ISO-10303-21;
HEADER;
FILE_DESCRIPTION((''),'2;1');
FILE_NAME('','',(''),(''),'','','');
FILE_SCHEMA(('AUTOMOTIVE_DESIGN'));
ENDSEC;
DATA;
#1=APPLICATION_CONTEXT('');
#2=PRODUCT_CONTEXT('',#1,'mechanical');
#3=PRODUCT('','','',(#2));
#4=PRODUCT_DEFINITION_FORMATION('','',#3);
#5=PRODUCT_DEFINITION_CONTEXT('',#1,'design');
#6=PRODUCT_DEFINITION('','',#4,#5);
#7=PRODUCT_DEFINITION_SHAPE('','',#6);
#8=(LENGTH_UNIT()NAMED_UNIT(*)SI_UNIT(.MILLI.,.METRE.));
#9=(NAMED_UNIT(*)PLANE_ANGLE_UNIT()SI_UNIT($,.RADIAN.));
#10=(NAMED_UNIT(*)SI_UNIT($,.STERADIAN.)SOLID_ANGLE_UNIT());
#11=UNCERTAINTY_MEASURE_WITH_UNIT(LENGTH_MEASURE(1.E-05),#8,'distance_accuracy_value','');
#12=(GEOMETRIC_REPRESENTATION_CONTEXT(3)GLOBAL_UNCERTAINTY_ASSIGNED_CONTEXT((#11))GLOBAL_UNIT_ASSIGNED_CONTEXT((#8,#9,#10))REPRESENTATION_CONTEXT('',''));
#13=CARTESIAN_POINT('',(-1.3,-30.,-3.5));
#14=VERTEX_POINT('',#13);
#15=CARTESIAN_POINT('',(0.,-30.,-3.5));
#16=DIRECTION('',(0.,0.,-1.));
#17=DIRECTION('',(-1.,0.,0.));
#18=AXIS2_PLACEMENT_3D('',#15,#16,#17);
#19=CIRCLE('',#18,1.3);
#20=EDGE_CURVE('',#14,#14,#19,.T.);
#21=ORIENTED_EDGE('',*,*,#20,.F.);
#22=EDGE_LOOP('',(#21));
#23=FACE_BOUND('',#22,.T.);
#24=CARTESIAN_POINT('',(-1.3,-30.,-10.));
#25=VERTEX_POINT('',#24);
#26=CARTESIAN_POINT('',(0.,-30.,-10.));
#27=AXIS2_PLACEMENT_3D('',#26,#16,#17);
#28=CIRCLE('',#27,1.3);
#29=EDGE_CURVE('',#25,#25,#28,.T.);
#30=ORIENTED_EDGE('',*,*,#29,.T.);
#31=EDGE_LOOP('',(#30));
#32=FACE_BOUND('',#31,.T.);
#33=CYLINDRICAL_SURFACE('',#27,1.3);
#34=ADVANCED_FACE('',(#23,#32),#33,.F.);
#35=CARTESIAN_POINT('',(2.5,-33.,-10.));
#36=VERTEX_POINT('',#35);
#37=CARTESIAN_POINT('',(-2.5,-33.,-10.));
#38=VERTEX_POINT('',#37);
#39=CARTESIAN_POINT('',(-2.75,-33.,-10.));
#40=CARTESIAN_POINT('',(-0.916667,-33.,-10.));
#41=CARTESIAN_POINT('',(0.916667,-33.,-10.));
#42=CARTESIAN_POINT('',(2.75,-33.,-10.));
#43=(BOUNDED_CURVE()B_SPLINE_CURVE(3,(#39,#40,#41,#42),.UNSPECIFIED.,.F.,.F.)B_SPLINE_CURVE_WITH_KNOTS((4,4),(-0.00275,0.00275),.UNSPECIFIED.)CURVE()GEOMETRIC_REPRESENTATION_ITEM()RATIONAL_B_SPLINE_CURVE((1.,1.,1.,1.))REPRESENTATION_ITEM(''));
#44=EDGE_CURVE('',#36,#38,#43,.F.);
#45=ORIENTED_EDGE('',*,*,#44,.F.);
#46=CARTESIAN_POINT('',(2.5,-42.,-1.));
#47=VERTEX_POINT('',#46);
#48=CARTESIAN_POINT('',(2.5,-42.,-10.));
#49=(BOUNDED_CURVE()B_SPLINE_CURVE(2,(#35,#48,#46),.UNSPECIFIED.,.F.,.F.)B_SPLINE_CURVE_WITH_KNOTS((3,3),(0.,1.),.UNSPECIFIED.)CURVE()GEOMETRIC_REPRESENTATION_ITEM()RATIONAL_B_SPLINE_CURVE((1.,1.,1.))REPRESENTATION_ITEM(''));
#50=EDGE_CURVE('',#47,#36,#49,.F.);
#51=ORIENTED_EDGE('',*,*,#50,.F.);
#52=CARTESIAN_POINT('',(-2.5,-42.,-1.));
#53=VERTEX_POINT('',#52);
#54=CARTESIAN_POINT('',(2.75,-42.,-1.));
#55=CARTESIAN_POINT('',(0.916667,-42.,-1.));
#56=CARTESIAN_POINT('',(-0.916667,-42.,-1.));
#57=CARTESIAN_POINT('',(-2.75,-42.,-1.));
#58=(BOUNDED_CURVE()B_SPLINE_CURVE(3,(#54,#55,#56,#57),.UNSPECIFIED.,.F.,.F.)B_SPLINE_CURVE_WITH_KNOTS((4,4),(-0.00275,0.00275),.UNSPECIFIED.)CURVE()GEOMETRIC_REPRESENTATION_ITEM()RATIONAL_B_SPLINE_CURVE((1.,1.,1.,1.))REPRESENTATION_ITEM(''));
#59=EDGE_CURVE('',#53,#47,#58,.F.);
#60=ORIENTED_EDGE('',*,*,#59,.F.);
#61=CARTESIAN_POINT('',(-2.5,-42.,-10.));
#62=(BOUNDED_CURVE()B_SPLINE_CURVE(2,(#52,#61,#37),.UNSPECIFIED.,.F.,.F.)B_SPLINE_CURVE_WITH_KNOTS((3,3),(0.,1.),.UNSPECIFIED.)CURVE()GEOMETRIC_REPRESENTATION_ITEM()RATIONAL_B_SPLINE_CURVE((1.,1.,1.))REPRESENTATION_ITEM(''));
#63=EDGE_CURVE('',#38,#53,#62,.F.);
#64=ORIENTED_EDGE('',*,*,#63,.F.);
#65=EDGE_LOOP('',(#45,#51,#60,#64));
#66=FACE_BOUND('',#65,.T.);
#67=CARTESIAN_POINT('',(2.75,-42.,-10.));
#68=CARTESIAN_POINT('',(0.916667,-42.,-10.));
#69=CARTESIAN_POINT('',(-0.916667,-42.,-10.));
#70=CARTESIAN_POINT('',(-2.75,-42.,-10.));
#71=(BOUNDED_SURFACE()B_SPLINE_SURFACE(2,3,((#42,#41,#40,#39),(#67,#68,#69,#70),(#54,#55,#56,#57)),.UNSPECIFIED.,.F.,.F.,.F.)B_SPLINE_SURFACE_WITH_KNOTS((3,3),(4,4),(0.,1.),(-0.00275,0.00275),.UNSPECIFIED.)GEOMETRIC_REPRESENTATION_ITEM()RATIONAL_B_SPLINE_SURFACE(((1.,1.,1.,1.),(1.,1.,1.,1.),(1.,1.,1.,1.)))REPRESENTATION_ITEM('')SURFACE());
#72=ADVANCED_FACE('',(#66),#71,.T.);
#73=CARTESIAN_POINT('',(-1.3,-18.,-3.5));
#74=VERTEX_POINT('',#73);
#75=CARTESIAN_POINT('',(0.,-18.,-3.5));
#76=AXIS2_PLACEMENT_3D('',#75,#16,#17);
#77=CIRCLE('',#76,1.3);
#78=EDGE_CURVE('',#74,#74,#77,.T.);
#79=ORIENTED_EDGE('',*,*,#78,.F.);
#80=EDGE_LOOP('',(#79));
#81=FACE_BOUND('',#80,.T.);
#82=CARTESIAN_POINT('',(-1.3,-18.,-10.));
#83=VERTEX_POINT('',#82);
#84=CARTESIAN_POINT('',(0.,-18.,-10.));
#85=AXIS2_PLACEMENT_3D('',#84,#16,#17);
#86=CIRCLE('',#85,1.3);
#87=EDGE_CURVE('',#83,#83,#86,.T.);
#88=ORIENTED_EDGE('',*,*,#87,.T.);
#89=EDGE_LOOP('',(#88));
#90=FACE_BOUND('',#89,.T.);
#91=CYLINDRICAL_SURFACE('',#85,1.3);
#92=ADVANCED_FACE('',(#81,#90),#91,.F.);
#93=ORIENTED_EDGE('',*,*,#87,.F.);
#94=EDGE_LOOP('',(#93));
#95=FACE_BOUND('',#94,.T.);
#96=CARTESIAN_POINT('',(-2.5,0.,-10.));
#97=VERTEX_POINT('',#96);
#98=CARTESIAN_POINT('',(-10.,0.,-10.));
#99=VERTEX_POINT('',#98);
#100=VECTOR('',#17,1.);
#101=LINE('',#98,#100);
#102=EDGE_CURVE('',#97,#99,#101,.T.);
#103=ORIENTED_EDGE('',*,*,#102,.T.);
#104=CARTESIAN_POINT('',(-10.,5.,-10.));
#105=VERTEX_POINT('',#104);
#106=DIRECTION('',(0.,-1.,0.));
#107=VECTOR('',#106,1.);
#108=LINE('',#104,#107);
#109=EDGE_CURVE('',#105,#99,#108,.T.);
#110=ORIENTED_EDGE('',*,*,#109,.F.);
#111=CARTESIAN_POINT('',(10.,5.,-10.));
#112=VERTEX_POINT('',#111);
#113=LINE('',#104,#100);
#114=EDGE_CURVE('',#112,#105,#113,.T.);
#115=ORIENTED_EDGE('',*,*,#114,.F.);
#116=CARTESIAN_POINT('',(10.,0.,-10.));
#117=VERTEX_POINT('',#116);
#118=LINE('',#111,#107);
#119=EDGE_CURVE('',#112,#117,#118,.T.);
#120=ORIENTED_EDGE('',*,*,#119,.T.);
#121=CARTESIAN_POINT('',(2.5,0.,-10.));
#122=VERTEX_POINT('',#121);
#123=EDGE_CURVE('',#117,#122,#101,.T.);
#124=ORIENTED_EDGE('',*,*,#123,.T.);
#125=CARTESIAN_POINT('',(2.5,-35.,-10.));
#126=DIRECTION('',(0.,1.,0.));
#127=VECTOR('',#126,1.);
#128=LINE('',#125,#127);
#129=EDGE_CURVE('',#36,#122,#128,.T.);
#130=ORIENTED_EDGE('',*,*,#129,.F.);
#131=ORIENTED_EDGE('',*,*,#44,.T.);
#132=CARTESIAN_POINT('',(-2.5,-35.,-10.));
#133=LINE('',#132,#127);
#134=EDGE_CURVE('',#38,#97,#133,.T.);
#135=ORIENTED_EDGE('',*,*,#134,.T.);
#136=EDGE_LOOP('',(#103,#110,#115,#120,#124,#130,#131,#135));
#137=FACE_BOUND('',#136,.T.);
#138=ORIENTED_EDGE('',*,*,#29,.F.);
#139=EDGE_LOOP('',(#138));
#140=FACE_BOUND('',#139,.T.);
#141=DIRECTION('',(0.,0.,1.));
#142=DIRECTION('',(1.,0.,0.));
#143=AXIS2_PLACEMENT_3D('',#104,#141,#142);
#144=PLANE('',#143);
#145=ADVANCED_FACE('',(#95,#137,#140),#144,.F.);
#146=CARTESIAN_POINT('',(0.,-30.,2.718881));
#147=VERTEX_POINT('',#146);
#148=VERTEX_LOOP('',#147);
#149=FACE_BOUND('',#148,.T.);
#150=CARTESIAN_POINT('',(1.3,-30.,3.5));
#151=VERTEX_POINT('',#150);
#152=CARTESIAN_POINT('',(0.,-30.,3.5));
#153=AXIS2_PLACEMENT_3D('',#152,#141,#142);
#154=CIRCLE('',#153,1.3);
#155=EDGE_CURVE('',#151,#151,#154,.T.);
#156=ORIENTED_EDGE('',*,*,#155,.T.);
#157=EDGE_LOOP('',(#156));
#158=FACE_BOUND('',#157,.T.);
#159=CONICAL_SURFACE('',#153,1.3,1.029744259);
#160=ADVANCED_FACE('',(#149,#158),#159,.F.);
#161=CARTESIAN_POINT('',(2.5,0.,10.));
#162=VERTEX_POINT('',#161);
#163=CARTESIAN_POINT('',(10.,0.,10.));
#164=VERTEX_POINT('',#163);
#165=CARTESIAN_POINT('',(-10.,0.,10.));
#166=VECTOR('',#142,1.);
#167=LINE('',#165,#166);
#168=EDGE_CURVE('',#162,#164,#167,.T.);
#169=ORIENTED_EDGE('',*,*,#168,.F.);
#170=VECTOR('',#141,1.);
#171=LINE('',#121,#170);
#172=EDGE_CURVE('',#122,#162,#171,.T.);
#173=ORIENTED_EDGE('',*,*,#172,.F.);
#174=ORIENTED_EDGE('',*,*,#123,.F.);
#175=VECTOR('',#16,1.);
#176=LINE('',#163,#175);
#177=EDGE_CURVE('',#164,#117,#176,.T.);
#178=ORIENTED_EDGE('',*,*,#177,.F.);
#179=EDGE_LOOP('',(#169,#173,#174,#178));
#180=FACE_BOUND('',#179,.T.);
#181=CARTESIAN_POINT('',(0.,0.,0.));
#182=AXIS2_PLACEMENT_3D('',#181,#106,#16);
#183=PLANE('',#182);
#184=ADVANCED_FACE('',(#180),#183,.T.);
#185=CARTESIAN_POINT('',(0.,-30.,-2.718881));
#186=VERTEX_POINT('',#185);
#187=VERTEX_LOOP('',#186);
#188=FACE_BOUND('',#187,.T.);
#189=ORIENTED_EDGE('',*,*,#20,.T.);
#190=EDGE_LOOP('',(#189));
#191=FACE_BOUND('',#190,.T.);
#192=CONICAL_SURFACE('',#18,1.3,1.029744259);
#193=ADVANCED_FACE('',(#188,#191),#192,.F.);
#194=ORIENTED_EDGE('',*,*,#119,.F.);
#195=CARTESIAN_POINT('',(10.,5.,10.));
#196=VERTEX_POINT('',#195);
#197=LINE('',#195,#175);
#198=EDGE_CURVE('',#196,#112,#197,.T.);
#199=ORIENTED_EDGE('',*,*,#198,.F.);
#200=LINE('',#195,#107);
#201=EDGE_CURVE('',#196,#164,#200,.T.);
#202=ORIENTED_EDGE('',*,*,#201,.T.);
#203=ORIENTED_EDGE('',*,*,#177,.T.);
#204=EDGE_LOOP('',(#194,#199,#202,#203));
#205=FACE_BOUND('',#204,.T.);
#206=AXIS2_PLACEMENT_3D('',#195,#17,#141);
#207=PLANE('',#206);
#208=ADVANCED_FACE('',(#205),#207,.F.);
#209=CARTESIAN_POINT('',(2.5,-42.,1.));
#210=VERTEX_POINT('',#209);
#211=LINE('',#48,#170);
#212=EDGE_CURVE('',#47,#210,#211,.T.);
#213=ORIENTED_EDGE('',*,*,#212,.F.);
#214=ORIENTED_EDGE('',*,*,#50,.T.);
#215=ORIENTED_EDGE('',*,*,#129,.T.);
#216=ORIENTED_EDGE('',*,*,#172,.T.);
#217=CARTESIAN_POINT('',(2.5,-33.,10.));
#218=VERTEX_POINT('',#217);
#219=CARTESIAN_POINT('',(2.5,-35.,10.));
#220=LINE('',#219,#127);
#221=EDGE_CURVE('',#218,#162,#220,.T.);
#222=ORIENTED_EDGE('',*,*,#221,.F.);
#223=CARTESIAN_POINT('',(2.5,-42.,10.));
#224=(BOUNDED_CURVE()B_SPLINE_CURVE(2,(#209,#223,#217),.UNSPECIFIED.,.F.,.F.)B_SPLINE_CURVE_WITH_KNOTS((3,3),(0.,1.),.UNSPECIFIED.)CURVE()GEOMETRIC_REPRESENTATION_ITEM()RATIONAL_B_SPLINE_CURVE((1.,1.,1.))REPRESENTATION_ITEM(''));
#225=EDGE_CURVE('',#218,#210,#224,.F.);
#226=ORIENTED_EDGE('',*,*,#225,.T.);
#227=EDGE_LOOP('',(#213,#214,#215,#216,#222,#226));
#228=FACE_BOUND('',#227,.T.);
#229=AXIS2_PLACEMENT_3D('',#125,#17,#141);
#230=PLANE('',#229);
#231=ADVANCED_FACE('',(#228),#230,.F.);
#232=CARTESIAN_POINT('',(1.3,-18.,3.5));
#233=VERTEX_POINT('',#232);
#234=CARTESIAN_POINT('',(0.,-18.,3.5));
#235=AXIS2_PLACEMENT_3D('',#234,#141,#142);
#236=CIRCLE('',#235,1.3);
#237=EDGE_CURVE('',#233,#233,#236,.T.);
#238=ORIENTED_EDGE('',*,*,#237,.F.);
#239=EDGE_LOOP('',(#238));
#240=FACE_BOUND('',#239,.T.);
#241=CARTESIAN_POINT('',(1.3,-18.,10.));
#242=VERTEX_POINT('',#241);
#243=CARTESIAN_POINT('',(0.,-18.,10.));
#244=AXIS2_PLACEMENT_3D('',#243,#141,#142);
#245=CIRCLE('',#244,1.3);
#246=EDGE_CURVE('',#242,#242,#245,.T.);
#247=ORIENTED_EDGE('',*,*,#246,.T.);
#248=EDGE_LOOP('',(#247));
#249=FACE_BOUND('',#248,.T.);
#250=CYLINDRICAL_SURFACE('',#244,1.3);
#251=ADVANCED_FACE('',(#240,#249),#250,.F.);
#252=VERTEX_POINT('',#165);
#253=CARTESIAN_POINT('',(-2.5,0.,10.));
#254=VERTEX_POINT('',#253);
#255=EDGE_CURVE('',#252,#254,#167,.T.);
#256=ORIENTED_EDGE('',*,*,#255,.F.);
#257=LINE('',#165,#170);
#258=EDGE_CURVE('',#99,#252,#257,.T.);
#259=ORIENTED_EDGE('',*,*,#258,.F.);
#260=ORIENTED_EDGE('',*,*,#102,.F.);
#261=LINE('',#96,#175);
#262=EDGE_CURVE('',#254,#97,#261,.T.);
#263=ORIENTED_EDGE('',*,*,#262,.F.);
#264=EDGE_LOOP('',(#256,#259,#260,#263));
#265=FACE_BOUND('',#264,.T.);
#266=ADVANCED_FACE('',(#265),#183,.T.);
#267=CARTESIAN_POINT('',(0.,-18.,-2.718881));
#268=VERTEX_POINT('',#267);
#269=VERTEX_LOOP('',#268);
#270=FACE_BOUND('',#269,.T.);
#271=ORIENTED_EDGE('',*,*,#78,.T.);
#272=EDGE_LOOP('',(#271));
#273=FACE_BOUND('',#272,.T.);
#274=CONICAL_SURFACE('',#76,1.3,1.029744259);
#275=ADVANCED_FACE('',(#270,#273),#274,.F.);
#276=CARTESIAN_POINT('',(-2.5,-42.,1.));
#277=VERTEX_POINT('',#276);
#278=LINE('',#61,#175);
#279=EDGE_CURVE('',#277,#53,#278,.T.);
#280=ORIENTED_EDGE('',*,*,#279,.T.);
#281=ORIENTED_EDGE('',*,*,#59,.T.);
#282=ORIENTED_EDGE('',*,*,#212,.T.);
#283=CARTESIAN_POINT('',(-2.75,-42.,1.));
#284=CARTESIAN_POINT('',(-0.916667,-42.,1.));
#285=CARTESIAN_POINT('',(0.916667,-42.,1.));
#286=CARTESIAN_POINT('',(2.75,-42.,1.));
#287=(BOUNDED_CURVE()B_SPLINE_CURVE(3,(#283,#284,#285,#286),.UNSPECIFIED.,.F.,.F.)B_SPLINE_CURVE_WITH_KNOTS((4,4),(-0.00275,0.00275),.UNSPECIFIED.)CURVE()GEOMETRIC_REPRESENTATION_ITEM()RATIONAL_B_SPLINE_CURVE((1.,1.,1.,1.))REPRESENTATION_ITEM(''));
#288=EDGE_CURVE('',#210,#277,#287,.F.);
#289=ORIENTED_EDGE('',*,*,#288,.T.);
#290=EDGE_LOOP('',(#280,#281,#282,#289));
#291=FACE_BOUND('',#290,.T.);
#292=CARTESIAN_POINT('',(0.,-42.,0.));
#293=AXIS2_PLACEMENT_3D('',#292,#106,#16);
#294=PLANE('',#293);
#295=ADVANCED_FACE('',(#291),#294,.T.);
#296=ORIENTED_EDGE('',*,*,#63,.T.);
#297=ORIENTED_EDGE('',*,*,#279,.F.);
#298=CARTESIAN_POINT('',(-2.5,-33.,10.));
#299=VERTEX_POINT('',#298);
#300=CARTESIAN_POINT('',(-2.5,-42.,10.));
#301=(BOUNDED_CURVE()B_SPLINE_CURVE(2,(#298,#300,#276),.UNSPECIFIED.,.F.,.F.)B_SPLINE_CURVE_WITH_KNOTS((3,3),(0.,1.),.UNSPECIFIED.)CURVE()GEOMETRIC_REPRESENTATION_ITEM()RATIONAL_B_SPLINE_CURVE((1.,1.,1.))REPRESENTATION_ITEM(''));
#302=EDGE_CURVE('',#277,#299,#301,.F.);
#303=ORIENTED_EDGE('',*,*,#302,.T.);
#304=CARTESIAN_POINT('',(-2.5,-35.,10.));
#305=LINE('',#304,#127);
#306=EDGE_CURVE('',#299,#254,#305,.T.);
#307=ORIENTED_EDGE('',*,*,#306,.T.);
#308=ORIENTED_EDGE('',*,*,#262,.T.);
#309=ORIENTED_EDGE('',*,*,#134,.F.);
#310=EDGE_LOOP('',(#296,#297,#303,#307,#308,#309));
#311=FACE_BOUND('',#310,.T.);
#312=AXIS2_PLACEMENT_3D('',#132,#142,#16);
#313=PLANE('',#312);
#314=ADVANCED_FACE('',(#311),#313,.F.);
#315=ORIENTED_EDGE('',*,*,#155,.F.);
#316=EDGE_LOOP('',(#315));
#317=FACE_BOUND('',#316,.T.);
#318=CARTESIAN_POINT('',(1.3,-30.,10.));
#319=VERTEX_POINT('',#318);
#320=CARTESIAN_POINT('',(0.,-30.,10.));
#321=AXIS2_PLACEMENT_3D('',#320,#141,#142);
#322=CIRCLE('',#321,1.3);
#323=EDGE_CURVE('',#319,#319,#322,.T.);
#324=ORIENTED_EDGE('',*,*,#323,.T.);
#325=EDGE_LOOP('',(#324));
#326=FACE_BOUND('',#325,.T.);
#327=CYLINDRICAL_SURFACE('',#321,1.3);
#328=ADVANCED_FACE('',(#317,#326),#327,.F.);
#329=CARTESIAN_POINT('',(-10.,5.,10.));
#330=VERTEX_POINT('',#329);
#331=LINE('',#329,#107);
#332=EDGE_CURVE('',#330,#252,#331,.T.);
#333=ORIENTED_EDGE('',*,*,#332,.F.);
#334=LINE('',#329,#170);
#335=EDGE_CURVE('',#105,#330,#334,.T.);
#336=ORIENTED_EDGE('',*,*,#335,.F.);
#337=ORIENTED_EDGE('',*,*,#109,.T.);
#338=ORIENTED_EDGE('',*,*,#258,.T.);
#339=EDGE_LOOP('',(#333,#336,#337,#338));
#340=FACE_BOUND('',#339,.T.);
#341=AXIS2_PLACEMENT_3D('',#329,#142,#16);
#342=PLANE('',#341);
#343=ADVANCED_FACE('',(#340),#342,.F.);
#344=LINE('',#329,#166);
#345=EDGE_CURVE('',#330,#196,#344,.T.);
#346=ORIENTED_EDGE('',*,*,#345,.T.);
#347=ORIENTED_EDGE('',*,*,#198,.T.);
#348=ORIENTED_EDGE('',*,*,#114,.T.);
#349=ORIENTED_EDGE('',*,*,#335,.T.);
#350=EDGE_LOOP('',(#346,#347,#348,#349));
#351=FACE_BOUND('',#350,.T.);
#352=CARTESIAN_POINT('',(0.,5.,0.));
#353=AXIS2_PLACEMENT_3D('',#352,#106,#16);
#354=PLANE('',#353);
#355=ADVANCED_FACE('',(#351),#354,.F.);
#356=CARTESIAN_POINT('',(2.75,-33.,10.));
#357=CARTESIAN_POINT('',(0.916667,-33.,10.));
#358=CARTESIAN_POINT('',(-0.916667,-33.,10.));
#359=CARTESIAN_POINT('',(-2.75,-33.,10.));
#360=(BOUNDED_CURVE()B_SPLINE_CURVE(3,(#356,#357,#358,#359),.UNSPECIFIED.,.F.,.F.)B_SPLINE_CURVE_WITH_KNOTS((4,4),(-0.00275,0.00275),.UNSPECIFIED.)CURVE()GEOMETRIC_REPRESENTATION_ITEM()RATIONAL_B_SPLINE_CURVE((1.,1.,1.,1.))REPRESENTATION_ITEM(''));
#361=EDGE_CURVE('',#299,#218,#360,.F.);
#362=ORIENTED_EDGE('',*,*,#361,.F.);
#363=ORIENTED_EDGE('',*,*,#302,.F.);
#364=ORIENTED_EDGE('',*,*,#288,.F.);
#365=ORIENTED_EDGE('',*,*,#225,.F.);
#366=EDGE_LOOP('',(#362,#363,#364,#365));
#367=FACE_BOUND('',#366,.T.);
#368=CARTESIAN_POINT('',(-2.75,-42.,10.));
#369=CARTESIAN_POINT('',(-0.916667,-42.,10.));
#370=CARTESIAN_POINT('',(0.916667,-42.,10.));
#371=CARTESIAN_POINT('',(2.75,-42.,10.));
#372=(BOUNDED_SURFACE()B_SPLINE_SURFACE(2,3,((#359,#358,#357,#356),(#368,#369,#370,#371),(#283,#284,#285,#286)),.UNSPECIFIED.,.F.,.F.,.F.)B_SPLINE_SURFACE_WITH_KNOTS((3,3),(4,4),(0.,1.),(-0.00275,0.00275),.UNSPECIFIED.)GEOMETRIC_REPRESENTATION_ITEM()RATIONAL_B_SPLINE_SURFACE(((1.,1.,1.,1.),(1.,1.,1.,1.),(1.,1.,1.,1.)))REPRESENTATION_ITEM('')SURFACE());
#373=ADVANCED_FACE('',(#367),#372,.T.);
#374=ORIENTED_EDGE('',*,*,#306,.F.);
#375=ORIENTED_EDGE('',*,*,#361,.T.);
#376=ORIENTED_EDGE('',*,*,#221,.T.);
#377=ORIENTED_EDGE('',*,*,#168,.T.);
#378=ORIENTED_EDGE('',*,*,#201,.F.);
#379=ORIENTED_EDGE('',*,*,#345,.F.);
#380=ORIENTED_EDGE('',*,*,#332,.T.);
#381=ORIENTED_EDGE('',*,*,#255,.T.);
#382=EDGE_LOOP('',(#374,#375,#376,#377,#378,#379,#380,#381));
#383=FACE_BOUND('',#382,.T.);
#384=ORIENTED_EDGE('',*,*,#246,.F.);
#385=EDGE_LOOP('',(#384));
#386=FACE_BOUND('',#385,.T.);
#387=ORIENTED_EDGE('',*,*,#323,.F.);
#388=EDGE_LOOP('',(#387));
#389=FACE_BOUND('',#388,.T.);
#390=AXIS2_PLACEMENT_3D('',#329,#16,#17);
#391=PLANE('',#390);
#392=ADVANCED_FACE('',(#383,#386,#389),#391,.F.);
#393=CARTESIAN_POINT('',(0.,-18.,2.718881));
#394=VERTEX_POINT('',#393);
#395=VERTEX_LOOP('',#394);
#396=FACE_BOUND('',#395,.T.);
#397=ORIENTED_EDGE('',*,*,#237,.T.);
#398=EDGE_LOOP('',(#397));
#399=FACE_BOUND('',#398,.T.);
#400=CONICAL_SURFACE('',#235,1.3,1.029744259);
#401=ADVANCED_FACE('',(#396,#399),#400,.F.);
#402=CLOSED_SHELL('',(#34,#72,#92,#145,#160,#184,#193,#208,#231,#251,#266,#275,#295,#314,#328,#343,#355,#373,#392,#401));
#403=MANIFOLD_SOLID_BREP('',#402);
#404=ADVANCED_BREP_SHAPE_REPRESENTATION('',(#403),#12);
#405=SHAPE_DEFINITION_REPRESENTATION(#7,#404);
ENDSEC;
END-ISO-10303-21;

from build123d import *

# Parameters (mm, degrees)
SKETCH_1_W           = 20
SKETCH_1_H           = 20
EXTRUDE_1_DEPTH      = 5
SKETCH_2_W           = 5
SKETCH_2_H           = 20
EXTRUDE_2_DEPTH      = 35
F_1_0MM_1_AT_2_COUNT = 2
F_1_0MM_1_AT_2_PITCH = 12
SKETCH_5_W           = 5
SKETCH_5_H           = 20
EXTRUDE_3_DEPTH      = 7
FILLET_1_SIZE        = 9


with BuildPart() as part:
    # 草圖1 → 填料-伸長1 (new body)
    with BuildSketch(Plane(origin=(0, 0, 0), x_dir=(1, 0, 0), z_dir=(0, 1, 0))):
        Rectangle(SKETCH_1_W, SKETCH_1_H)
    extrude(amount=EXTRUDE_1_DEPTH)

    # 草圖2 → 填料-伸長2 (add)
    with BuildSketch(Plane.XZ):
        Rectangle(SKETCH_2_W, SKETCH_2_H)
    extrude(amount=EXTRUDE_2_DEPTH)

    # 草圖4 → Ø1.0mm 定位孔1 (revolve, cut)
    with BuildSketch(Plane(origin=(0, -18, 10), x_dir=(0, -1, 0), z_dir=(1, 0, 0))):
        Polygon((0, 0), (0, 7.281118805), (1.3, 6.5), (1.3, 0), align=None)
    f_1_0mm_1 = revolve(axis=Axis((0, -18, 16.35), (0, 0, -1)), mode=Mode.SUBTRACT)

    # Ø1.0mm 定位孔1 at 2: Ø1.0mm 定位孔1 ×2
    with Locations(*[(0, -i * F_1_0MM_1_AT_2_PITCH, 0) for i in range(1, F_1_0MM_1_AT_2_COUNT)]):
        add(f_1_0mm_1, mode=Mode.SUBTRACT)

    # 鏡射1: Ø1.0mm 定位孔1 across plane
    add(f_1_0mm_1.mirror(Plane.XY), mode=Mode.SUBTRACT)

    # 鏡射1 copy 1 sketch → 鏡射1 copy 1 (revolve, cut)
    with BuildSketch(Plane(origin=(0, -30, -10), x_dir=(0, -1, 0), z_dir=(1, 0, 0))):
        Polygon((0, 0), (0, -7.281118805), (1.3, -6.5), (1.3, 0), align=None)
    revolve(axis=Axis((0, -30, -16.35), (0, 0, -1)), mode=Mode.SUBTRACT)

    # 草圖5 → 填料-伸長3 (add)
    with BuildSketch(Plane.XZ.offset(35)):
        Rectangle(SKETCH_5_W, SKETCH_5_H)
    extrude(amount=EXTRUDE_3_DEPTH)

    # 圓角1
    # a fillet whose section is not a circle: 9 mm, written as the material it takes off along each edge
    with BuildSketch(Plane(origin=(-25, -42, 10), x_dir=(0, 1, 0), z_dir=(1, 0, 0)), Plane(origin=(25, -42, -10), x_dir=(0, 1, 0), z_dir=(-1, 0, 0))) as fillet_1_piece_1:
        with BuildLine():
            Bezier((FILLET_1_SIZE, 0), (0, 0), (0, -FILLET_1_SIZE), weights=[1, 1, 1])
            Line((0, -FILLET_1_SIZE), (0, 0))
            Line((0, 0), (FILLET_1_SIZE, 0))
        make_face()
    extrude(amount=50, mode=Mode.SUBTRACT)


solid = part.part
